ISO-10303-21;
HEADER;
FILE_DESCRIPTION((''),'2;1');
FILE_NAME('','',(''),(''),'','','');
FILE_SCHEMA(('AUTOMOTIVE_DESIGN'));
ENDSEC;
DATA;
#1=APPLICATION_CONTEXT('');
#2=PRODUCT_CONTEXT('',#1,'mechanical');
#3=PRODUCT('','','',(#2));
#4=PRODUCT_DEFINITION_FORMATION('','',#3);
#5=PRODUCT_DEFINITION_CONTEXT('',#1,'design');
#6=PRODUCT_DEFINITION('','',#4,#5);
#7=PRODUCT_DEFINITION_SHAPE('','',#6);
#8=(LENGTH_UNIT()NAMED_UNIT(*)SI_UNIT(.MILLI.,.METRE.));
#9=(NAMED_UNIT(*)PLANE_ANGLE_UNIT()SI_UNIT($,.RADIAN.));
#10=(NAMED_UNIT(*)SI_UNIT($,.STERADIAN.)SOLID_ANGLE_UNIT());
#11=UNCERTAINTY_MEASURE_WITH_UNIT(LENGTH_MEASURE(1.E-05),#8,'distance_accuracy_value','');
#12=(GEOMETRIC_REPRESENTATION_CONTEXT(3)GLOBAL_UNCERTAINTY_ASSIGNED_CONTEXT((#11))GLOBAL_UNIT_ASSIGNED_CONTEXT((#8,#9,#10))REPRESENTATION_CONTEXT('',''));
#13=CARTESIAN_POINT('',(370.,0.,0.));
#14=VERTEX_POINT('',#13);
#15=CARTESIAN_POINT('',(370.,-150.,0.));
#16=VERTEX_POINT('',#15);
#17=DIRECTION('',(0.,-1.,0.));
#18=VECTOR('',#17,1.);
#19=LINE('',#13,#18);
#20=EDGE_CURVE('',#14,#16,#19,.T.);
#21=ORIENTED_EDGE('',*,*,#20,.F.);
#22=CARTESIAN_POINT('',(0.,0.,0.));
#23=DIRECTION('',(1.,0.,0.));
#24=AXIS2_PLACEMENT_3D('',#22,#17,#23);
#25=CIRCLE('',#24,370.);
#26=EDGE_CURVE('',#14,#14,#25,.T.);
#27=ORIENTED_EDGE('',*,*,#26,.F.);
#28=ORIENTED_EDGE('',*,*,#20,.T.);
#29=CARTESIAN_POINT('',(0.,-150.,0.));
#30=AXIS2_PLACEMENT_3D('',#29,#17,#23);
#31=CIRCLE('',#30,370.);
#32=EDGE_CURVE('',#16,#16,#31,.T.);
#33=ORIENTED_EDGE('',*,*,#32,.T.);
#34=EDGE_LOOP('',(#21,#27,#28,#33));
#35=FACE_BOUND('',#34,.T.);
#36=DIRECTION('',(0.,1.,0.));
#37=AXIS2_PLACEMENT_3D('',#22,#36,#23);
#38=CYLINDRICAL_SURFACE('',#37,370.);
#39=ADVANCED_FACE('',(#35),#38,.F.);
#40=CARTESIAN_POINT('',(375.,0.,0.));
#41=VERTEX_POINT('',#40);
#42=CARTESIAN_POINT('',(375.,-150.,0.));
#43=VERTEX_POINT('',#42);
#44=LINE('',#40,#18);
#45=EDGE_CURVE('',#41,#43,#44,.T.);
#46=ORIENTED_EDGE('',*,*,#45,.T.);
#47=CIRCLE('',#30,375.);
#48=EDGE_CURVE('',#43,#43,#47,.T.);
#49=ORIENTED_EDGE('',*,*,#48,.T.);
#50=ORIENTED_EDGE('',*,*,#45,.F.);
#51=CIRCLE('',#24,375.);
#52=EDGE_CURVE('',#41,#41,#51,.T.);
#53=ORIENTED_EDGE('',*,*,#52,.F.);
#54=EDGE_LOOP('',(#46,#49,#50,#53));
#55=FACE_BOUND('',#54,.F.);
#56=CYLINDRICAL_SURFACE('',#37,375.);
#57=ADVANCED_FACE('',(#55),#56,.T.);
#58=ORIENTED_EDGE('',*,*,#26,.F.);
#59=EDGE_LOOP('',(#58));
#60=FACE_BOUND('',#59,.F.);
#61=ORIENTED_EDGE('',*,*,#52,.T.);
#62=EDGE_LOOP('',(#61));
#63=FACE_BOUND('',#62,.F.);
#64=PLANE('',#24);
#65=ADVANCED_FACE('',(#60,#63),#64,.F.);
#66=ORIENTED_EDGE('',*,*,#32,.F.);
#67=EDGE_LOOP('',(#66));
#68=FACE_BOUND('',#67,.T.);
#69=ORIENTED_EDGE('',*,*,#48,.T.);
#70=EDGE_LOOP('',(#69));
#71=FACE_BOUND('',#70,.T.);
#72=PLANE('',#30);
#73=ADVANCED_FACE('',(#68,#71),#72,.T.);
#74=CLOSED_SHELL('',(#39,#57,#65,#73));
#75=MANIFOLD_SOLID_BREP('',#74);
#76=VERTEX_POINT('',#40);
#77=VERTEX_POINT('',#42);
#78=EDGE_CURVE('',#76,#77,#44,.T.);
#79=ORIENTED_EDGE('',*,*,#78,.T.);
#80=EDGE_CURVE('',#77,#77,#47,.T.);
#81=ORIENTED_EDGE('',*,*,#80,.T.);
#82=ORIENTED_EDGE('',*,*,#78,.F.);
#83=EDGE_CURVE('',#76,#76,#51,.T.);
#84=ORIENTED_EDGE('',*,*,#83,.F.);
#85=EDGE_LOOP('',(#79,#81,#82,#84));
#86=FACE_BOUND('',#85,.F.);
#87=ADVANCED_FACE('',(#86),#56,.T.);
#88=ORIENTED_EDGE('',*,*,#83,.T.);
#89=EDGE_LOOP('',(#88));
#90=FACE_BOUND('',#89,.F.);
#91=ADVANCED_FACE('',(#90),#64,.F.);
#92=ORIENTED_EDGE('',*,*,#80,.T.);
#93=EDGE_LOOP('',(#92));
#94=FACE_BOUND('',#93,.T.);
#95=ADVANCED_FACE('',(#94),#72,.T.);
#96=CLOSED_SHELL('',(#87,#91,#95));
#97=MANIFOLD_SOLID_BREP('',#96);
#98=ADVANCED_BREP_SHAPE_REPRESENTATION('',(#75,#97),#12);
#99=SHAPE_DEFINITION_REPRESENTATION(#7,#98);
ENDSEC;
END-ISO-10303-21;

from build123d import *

# Parameters (mm, degrees)
F5_R     = 375
F5_R_2   = 370
F6_DEPTH = 150
F0_R     = 375


# Not quite as in the source:
# - a feature of the source that left no trace in its solid (it failed there, or was rolled back) is left out
# - the program builds the solid bodies; features that only make, move or delete a surface that nothing else refers to are left out


with BuildPart() as f6:
    # F5 (on face) → F6 (new body)
    with BuildSketch(Plane.XZ):
        Circle(F5_R)
        Circle(F5_R_2, mode=Mode.SUBTRACT)
    extrude(amount=F6_DEPTH)


with BuildPart() as f6b:
    # F0 (on Front) → F6, piece 2 (new body)
    with BuildSketch(Plane.XZ):
        Circle(F0_R)
    extrude(amount=F6_DEPTH)


solid = Compound([f6.part, f6b.part])
